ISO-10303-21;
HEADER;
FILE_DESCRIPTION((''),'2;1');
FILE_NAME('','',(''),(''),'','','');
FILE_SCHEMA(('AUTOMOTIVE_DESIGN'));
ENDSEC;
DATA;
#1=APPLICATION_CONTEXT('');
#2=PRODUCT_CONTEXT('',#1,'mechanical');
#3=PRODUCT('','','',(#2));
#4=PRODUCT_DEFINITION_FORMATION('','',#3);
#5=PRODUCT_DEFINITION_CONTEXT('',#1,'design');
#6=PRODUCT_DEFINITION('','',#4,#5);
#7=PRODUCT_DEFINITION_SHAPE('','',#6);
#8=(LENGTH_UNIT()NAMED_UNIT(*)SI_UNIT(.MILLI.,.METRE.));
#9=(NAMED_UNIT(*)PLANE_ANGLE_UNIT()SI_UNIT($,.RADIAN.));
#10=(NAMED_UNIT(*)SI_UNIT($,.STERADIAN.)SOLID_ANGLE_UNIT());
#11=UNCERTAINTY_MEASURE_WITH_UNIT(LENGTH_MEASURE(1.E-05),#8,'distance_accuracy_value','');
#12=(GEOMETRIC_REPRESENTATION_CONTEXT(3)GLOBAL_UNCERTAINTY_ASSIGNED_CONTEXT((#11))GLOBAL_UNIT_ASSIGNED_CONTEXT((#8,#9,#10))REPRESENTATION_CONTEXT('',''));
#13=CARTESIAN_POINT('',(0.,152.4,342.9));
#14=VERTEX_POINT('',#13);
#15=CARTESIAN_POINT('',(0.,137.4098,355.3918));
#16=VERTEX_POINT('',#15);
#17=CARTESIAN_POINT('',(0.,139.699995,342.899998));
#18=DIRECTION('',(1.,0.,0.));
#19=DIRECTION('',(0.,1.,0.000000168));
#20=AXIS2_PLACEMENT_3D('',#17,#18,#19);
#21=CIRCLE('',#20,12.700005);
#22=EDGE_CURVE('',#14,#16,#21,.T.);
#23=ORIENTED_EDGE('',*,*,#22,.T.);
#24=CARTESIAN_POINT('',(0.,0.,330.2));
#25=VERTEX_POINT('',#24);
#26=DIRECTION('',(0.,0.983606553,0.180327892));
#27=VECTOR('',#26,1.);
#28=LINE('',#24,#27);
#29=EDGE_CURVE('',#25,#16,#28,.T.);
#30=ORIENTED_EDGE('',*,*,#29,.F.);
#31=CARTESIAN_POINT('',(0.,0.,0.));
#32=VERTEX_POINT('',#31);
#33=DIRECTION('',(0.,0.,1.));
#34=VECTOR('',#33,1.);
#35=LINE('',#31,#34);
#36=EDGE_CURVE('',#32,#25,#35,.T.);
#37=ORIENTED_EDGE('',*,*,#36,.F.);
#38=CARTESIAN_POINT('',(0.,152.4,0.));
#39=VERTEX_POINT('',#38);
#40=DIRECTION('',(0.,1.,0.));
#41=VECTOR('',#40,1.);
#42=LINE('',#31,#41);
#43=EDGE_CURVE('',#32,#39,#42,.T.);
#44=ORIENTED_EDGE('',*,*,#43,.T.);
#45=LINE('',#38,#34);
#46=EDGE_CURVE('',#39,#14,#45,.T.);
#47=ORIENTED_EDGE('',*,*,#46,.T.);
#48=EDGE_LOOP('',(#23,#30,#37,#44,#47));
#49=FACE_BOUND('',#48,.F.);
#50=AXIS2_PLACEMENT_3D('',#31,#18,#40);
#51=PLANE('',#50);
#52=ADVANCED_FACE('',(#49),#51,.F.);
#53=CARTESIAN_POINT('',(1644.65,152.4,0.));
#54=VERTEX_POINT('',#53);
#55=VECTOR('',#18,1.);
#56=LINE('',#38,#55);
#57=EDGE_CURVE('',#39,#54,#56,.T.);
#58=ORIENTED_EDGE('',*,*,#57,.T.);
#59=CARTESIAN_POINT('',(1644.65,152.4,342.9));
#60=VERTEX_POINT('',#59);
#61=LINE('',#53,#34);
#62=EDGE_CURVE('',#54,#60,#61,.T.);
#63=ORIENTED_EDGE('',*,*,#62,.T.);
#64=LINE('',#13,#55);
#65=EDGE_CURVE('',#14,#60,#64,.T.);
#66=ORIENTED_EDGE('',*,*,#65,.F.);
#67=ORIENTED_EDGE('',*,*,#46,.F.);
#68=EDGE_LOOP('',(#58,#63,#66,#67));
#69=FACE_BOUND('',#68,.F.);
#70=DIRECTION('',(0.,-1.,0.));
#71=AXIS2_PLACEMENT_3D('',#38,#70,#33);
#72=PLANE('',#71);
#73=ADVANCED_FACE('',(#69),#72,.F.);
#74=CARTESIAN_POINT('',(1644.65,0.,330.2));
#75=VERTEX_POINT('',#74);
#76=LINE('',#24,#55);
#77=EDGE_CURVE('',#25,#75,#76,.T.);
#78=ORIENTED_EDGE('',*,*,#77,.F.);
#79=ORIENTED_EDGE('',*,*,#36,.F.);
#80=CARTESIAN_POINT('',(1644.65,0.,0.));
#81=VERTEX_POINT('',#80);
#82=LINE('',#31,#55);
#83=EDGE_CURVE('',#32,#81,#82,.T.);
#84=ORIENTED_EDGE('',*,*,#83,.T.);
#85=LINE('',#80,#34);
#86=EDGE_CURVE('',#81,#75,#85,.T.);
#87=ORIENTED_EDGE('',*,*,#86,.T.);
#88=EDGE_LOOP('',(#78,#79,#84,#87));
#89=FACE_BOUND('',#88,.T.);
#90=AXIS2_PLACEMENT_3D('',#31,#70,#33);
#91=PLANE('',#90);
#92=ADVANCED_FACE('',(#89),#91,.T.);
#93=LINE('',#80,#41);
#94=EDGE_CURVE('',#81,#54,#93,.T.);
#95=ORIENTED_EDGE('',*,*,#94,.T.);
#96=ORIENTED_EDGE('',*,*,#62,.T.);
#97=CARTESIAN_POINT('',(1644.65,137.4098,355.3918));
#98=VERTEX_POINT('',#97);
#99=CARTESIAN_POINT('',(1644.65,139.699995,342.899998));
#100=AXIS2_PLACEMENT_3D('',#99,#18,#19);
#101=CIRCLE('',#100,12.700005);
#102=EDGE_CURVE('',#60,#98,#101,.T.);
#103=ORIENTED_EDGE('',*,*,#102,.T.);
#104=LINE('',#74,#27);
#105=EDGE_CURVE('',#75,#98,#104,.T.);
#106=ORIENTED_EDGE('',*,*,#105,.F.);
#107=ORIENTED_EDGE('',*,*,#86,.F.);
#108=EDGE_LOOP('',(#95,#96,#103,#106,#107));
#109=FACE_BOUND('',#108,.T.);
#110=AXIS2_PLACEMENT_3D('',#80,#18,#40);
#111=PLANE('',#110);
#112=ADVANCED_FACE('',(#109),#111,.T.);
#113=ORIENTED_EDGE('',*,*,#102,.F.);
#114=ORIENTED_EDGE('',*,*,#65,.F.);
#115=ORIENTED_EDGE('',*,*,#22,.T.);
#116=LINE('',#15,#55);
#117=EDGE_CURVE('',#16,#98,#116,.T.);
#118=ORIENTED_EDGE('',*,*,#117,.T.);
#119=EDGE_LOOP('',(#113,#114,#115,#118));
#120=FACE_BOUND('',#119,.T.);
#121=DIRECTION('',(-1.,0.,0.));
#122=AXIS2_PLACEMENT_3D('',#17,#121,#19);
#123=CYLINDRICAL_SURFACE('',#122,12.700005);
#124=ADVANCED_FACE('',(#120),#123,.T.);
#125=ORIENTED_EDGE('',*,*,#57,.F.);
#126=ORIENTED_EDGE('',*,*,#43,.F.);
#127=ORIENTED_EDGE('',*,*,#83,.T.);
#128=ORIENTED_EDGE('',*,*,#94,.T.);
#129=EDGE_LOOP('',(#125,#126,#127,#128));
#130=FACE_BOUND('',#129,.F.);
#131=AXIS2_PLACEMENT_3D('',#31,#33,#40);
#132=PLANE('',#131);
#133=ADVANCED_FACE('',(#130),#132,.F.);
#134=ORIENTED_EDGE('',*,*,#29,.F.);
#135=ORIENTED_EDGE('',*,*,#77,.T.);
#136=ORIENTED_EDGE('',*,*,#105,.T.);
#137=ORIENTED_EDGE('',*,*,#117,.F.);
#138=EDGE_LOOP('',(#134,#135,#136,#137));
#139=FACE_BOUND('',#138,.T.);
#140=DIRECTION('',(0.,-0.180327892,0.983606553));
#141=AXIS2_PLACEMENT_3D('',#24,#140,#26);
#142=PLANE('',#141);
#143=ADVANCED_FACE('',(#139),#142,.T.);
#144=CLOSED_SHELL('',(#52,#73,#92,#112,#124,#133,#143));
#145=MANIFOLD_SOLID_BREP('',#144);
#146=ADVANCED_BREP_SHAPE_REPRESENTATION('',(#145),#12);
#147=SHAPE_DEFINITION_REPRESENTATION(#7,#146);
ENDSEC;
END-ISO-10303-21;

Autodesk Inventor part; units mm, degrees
ref_plane "YZ Plane" through (0, 0, 0) normal (1, 0, 0) x (0, 1, 0)
ref_plane "XZ Plane" through (0, 0, 0) normal (0, 1, 0) x (-1, 0, 0)
ref_plane "XY Plane" through (0, 0, 0) normal (0, 0, 1) x (1, 0, 0)
sketch "Profile" plane through (0, 0, 0) normal (0, 0, 1) x (1, 0, 0)
  line L0 (0, 0) -> (0, 330.2)
  line L1 (0, 0) -> (152.4, 0)
  line L2 (152.4, 0) -> (152.4, 342.9)
  line L3 (152.4, 342.9) -> (139.7, 342.9) construction
  line L4 (152.4, 342.9) -> (139.7, 342.9) construction
  arc A0 (152.4, 342.9) -> (137.4098, 355.3918) centre (139.7, 342.9) ccw
  line L5 (0, 330.2) -> (137.4098, 355.3918)
  dimension "d0" = 330.2
  dimension "d1" = 152.4
  dimension "d2" = 342.9
  dimension "d3" = 12.7
  dimension "d4" = 12.7
sketch "Sketch1" plane through (0, 0, 0) normal (1, 0, 0) x (0, 1, 0)
  line L0 (0, 0) -> (0, 330.2)
  line L1 (0, 0) -> (152.4, 0)
  line L2 (152.4, 0) -> (152.4, 342.9)
  line L3 (152.4, 342.9) -> (139.7, 342.9) construction
  line L4 (152.4, 342.9) -> (139.7, 342.9) construction
  arc A0 (152.4, 342.9) -> (137.4098, 355.3918) centre (139.7, 342.9) ccw
  line L5 (0, 330.2) -> (137.4098, 355.3918)
extrude "Extrusion1" add sketch "Sketch1" along normal blind 1644.65
properties part number "O" material "Granite, Cut, Polished"
